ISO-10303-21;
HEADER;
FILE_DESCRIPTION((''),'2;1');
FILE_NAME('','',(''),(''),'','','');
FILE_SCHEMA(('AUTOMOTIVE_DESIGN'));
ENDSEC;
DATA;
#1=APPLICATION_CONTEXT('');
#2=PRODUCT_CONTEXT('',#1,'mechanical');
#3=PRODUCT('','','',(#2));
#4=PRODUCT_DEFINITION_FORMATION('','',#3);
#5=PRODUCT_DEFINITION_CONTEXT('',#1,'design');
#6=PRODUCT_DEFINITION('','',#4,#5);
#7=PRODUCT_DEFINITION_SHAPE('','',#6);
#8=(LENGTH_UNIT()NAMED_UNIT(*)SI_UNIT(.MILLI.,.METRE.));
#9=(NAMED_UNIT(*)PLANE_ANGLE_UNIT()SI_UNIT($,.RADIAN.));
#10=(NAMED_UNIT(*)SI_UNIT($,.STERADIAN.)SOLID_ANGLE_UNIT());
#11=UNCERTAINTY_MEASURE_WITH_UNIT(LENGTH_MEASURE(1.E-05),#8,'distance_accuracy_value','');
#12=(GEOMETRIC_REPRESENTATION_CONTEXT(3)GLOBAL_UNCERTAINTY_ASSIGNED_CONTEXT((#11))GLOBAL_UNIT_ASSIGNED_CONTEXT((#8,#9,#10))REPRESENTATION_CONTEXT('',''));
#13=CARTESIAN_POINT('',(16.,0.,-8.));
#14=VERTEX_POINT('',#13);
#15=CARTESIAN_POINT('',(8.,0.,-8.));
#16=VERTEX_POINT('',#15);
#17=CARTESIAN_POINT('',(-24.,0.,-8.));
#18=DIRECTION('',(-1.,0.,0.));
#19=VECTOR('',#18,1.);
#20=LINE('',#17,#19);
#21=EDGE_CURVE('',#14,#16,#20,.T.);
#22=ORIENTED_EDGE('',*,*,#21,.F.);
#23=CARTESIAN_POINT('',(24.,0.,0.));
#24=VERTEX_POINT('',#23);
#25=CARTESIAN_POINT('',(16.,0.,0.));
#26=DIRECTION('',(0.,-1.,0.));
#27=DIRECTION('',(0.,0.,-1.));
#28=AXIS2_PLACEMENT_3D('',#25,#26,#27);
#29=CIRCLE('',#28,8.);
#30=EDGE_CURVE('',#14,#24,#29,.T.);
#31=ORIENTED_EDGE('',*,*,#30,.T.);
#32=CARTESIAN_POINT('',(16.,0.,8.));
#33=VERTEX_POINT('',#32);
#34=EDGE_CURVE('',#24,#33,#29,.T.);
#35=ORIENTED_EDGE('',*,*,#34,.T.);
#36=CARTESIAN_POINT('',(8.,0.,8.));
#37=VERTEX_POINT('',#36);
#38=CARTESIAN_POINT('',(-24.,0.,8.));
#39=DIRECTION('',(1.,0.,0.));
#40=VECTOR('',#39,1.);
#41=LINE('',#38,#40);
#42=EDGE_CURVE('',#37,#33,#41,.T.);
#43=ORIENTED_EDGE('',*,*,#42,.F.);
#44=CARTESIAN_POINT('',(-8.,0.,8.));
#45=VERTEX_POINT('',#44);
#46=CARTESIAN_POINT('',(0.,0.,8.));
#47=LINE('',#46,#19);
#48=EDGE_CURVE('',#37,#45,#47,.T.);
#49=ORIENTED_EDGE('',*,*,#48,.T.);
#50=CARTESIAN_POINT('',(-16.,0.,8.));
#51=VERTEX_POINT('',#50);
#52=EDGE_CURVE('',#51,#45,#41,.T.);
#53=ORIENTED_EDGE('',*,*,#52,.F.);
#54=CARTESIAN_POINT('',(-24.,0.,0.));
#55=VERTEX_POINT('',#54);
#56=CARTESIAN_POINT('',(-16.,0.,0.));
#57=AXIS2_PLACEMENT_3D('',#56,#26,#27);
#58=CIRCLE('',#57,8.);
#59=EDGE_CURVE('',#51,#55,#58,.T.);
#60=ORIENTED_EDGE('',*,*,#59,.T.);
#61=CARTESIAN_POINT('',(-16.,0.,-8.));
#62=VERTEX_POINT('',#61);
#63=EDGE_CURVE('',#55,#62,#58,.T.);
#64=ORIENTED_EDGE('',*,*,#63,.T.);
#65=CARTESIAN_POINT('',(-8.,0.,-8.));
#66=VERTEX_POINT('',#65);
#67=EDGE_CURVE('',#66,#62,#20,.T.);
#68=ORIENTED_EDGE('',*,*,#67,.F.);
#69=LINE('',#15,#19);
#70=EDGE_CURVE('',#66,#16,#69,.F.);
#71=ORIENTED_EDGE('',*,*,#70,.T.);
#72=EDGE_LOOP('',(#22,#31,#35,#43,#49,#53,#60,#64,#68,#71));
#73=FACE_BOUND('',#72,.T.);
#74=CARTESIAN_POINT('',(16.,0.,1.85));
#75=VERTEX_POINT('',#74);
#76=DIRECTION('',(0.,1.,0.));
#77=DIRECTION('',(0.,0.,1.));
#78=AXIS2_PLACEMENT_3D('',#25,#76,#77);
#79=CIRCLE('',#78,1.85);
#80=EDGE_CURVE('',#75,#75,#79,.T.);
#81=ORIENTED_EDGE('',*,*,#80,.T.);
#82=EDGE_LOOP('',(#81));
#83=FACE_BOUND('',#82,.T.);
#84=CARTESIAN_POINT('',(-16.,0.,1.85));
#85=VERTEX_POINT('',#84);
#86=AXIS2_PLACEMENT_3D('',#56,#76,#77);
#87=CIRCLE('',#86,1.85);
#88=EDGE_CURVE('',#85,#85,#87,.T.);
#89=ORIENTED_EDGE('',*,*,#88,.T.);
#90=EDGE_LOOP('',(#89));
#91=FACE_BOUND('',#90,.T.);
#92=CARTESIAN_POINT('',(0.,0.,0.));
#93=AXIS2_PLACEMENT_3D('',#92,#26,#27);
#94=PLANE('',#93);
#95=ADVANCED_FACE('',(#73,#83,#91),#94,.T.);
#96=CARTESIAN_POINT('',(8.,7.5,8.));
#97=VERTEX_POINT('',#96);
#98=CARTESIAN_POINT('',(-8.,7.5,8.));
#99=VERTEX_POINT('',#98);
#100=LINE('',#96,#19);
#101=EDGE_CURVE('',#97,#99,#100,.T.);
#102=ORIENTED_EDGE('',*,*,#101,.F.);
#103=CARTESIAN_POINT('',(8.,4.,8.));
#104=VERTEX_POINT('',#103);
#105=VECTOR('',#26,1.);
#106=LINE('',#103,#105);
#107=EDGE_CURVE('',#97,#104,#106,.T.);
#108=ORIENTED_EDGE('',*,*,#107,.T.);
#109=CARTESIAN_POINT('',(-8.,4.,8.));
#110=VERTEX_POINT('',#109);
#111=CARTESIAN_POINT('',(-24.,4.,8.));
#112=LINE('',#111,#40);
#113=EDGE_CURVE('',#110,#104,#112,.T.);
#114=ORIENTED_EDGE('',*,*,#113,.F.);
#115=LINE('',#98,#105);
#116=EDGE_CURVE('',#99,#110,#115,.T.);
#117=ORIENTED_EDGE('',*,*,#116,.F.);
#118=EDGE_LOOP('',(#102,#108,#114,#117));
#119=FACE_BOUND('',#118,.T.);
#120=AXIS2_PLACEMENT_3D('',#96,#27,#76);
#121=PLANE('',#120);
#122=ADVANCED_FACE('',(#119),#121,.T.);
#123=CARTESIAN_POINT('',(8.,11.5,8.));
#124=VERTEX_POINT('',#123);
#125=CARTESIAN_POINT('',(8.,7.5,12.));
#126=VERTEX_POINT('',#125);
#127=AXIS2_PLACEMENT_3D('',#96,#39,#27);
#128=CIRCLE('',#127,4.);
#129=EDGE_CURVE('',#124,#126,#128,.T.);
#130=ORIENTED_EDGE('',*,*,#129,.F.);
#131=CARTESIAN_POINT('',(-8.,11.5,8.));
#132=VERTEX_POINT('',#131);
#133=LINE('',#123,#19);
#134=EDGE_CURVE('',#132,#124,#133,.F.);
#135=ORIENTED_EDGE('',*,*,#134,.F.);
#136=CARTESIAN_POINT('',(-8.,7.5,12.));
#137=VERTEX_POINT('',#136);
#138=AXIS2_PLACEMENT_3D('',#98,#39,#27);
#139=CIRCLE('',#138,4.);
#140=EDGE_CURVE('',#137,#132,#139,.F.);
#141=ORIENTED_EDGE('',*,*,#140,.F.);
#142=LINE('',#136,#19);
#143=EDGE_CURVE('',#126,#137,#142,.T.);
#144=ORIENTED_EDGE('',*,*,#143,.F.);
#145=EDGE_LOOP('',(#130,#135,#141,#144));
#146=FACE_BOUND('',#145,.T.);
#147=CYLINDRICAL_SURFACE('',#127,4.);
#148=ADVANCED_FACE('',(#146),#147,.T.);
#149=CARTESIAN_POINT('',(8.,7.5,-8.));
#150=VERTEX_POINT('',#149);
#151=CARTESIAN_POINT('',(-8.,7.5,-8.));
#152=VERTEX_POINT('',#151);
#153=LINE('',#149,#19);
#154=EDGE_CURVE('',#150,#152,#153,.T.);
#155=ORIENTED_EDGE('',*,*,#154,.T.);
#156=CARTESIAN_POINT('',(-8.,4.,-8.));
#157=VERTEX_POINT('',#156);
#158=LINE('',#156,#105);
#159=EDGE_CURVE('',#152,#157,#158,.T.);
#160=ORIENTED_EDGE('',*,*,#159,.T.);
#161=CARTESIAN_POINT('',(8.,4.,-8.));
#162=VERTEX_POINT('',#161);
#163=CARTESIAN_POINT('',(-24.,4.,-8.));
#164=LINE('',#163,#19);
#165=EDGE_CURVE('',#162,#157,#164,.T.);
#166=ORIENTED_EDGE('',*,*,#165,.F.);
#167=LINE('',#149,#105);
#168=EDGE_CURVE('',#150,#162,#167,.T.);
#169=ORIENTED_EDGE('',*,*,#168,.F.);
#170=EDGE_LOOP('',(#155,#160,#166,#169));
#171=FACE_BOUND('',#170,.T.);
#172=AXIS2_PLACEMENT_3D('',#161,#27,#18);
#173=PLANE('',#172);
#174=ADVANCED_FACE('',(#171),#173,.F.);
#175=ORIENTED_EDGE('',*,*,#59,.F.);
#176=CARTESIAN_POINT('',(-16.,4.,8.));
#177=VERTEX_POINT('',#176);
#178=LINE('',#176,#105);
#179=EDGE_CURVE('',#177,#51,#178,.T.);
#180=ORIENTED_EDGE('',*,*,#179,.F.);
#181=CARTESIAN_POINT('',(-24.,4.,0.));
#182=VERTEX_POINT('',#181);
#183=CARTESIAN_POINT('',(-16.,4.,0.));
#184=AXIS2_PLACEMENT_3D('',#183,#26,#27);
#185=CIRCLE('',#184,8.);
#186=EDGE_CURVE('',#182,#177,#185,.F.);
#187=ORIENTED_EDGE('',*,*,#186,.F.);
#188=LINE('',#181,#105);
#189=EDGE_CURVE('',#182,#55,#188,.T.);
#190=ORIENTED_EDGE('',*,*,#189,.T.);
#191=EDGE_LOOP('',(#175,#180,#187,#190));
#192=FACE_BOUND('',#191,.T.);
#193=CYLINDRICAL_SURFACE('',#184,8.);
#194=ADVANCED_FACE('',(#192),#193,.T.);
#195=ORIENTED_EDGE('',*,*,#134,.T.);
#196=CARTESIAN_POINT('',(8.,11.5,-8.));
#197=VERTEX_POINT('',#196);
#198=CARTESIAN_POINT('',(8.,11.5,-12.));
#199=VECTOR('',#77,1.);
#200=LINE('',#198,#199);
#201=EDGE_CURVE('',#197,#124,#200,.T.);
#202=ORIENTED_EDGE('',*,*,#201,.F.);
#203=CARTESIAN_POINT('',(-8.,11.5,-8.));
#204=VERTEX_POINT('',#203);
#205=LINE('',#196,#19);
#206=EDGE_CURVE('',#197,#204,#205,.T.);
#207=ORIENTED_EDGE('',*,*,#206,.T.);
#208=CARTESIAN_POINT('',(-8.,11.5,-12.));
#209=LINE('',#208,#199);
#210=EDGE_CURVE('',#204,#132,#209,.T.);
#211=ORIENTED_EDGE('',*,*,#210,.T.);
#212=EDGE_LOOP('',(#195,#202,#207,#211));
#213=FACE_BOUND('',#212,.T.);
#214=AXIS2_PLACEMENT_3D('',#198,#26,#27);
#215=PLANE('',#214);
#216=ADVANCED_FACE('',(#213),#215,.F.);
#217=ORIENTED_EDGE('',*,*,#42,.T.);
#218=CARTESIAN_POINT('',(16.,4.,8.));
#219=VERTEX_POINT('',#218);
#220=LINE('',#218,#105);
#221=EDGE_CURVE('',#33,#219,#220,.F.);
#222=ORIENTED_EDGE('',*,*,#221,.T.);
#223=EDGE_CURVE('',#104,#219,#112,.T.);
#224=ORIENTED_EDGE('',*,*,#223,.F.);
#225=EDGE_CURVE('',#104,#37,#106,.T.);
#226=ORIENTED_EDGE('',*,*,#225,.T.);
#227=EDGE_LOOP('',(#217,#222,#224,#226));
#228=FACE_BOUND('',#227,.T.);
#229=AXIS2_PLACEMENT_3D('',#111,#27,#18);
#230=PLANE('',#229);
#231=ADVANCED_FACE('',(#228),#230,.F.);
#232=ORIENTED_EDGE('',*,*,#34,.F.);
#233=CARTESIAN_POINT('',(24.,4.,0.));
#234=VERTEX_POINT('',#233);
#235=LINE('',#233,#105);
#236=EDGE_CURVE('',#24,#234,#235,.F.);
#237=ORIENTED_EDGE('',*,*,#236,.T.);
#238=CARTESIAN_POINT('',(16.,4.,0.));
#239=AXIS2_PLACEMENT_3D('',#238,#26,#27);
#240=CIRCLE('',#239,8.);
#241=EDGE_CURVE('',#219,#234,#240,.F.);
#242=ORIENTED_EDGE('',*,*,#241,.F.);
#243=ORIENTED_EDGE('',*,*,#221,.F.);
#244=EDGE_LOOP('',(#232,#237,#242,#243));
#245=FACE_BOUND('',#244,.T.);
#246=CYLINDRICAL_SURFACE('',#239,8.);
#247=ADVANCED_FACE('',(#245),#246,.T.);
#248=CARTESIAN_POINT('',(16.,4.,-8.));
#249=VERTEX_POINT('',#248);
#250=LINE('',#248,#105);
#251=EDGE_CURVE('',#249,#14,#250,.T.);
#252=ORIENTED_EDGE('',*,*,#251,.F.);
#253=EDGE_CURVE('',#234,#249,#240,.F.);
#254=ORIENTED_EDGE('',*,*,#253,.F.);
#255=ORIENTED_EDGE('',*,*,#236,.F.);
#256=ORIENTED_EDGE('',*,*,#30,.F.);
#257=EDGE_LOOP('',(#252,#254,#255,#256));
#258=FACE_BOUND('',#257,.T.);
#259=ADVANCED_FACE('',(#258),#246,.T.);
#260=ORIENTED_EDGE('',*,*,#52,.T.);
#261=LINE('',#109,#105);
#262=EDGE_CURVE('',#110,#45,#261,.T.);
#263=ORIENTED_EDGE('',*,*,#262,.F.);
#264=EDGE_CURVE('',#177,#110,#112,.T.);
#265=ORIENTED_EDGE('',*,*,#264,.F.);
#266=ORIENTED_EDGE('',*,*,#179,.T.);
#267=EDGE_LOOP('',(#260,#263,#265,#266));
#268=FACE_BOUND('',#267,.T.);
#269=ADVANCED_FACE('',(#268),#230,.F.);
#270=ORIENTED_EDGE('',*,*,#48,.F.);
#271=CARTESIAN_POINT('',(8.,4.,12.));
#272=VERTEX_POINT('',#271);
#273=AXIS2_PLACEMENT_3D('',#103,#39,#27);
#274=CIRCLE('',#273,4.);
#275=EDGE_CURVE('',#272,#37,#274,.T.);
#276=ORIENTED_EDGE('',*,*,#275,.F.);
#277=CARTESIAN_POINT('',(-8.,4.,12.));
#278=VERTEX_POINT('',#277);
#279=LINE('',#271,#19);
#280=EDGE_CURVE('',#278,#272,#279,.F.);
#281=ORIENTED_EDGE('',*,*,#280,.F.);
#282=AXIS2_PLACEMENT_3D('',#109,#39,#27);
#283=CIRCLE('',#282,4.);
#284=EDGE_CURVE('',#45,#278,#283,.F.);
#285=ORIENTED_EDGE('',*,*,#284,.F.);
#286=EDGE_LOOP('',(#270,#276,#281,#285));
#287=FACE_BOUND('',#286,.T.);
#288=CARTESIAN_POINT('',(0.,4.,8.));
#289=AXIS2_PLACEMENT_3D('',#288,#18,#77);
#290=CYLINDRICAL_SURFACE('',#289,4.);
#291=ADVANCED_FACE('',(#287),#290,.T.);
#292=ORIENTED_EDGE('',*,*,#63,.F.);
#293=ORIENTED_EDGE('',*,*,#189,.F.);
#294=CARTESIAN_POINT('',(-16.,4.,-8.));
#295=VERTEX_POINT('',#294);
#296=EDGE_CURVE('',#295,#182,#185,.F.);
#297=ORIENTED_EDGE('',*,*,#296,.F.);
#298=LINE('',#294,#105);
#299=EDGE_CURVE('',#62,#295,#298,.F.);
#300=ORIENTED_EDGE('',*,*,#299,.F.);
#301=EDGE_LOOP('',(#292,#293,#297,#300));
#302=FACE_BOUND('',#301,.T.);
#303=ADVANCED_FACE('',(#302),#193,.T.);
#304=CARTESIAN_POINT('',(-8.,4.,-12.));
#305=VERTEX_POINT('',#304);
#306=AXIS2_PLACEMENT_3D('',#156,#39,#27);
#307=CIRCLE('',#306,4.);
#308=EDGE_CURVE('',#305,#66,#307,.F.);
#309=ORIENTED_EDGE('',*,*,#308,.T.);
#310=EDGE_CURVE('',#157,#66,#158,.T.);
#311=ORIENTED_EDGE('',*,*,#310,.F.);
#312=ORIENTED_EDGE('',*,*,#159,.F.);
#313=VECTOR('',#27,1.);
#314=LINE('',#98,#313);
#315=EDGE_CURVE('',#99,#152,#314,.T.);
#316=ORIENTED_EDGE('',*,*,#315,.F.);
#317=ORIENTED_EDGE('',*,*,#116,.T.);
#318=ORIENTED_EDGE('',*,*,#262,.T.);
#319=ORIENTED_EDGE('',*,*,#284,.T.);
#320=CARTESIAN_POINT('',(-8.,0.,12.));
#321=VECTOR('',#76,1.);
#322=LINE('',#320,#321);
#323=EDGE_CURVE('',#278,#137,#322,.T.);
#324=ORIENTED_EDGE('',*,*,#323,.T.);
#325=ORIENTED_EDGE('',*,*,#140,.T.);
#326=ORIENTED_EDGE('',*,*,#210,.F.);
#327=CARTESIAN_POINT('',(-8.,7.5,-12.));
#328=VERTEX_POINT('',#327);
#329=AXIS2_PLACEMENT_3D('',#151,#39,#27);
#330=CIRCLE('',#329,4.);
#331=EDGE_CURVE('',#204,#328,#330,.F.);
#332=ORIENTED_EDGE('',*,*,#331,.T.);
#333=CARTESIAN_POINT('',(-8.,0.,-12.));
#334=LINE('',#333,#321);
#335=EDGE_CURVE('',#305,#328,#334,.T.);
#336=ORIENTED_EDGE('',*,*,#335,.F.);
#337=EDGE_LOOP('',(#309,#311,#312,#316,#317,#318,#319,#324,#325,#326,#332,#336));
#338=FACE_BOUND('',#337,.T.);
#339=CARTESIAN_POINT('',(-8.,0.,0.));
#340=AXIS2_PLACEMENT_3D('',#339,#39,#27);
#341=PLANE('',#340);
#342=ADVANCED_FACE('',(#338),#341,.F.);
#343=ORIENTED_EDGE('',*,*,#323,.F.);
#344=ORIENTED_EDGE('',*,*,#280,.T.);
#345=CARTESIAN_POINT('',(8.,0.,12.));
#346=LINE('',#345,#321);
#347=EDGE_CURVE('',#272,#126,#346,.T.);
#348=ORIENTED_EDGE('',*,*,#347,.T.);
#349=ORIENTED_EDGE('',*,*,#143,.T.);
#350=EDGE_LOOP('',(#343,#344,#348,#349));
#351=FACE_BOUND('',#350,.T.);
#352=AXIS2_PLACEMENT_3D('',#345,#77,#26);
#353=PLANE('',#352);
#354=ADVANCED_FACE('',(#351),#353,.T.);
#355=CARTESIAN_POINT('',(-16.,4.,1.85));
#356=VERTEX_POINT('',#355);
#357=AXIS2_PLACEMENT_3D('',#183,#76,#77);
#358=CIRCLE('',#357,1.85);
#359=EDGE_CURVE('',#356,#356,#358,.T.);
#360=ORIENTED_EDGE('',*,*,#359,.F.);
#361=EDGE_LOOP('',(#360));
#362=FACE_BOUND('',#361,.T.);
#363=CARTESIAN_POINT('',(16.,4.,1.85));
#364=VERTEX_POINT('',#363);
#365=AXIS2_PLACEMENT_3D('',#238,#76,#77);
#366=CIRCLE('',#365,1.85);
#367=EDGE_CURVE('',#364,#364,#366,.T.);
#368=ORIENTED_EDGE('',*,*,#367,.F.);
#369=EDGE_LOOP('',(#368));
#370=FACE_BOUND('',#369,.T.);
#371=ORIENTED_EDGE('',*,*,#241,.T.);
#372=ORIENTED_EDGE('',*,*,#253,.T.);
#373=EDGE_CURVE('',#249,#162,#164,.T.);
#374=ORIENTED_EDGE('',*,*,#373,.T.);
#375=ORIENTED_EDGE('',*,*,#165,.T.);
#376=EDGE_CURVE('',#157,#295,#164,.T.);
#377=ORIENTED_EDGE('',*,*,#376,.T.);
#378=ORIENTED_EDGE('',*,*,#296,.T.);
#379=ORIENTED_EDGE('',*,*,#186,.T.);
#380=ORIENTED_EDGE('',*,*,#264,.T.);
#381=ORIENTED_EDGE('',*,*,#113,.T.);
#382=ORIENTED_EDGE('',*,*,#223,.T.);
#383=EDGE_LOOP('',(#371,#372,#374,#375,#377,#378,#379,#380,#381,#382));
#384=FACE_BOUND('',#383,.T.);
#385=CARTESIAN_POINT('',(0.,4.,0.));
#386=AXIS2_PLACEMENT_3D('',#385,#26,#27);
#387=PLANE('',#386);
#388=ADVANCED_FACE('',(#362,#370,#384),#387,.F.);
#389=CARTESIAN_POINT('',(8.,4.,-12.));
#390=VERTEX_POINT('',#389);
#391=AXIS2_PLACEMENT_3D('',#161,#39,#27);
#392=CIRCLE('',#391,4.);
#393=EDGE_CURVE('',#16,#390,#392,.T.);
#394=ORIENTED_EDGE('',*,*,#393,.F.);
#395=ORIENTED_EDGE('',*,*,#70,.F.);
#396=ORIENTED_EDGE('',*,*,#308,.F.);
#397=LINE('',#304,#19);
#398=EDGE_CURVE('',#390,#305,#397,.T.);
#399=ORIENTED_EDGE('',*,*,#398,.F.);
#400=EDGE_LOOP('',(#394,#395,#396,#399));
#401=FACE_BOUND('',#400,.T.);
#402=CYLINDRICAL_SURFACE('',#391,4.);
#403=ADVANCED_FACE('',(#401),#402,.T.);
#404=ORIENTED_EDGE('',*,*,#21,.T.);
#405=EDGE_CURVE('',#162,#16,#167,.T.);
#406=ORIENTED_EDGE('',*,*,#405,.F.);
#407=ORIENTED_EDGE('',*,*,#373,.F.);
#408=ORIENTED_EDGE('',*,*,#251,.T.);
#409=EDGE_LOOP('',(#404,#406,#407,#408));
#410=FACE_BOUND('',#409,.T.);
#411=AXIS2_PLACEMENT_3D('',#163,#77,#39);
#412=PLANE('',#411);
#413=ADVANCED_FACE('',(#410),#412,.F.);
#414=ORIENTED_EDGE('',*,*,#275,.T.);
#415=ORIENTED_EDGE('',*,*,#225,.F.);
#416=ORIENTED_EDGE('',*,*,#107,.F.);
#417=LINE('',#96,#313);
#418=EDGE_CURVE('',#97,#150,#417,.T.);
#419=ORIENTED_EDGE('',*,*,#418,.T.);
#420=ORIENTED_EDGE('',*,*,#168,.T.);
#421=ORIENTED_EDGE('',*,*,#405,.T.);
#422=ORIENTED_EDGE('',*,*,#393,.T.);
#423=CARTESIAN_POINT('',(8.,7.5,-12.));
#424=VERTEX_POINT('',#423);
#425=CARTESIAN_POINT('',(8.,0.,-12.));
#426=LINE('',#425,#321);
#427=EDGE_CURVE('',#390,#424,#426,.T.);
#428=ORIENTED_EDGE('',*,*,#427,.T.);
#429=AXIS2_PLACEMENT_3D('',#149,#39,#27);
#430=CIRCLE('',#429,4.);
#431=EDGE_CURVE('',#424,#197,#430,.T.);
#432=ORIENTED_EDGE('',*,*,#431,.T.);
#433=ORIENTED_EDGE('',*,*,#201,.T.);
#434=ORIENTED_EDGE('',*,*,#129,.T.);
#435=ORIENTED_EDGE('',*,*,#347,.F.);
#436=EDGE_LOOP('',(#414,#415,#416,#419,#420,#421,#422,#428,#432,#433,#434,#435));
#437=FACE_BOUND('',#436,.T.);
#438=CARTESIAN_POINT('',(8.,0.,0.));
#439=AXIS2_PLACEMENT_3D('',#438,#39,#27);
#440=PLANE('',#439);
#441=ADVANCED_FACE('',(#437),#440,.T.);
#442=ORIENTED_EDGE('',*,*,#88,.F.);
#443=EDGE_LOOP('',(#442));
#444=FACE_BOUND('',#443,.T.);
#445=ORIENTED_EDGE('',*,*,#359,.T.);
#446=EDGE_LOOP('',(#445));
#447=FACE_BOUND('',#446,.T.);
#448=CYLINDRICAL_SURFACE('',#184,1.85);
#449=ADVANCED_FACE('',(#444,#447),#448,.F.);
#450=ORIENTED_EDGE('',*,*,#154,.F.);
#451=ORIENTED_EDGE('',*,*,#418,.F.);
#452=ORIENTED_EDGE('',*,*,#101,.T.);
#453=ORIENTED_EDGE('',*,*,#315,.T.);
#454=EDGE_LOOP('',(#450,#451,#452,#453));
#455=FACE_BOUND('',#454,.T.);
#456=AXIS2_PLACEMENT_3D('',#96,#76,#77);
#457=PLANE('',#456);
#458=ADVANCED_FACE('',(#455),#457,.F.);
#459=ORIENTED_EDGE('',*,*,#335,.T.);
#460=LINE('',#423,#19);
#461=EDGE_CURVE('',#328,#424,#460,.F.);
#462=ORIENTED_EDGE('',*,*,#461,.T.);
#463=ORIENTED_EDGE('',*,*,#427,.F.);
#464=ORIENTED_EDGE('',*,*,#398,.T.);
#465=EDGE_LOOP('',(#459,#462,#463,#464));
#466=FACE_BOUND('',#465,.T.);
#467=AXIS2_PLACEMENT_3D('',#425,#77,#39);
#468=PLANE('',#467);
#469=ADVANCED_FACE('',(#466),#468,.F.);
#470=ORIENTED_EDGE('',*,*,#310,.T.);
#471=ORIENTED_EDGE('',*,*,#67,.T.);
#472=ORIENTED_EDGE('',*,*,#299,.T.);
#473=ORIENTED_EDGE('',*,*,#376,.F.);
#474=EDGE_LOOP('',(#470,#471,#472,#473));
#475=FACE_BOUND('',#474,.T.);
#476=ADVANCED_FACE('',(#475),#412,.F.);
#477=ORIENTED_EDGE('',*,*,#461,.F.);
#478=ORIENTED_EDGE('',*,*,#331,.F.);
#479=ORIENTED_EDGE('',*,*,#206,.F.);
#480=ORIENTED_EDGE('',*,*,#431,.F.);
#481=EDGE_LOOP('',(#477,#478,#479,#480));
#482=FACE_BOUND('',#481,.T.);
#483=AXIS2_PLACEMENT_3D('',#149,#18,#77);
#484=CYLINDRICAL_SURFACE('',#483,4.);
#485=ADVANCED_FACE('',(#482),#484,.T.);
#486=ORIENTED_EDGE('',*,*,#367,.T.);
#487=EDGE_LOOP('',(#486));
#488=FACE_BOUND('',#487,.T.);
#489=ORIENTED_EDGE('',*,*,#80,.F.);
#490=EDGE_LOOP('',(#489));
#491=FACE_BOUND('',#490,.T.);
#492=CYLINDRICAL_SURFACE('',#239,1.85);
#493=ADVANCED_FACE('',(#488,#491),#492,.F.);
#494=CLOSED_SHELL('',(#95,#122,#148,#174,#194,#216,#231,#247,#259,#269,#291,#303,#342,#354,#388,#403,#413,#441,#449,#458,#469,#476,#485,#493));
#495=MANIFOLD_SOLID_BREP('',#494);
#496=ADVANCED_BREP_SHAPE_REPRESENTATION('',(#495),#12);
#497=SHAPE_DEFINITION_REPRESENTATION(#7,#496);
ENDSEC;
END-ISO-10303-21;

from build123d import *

# Parameters (mm, degrees)
SKETCH1_W           = 48
SKETCH1_H           = 16
SKETCH1_R           = 1.85
BOSS_EXTRUDE1_DEPTH = 4
BOSS_EXTRUDE2_DEPTH = 16
FILLET1_R           = 4
FILLET2_R           = 8


with BuildPart() as part:
    # Sketch1 → Boss-Extrude1 (new body)
    with BuildSketch(Plane(origin=(0, 0, 0), x_dir=(1, 0, 0), z_dir=(0, 1, 0))):
        Rectangle(SKETCH1_W, SKETCH1_H)
        with Locations(Location((-16, 0, 0), (0, 0, 270))):
            Circle(SKETCH1_R, mode=Mode.SUBTRACT)
        with Locations(Location((16, 0, 0), (0, 0, 270))):
            Circle(SKETCH1_R, mode=Mode.SUBTRACT)
    extrude(amount=BOSS_EXTRUDE1_DEPTH)

    # Sketch2 → Boss-Extrude2 (add)
    with BuildSketch(Plane.ZY.offset(8)):
        Polygon((-8, 4), (-8, 0), (-12, 0), (-12, 11.5), (12, 11.5), (12, 0), (8, 0), (8, 4), (8, 7.5), (-8, 7.5), align=None)
    extrude(amount=-BOSS_EXTRUDE2_DEPTH)

    # Fillet1
    fillet1_edges = [part.edges().sort_by_distance(p)[0] for p in [
        (0, 11.5, 12),
        (0, 0, 12),
        (0, 0, -12),
        (0, 11.5, -12),
    ]]
    fillet(fillet1_edges, radius=FILLET1_R)

    # Fillet2
    fillet2_edges = [part.edges().sort_by_distance(p)[0] for p in [
        (-24, 2, 8),
        (-24, 2, -8),
        (24, 2, 8),
        (24, 2, -8),
    ]]
    fillet(fillet2_edges, radius=FILLET2_R - 0.0001)  # a hair under: the kernel refuses the full size


solid = part.part
